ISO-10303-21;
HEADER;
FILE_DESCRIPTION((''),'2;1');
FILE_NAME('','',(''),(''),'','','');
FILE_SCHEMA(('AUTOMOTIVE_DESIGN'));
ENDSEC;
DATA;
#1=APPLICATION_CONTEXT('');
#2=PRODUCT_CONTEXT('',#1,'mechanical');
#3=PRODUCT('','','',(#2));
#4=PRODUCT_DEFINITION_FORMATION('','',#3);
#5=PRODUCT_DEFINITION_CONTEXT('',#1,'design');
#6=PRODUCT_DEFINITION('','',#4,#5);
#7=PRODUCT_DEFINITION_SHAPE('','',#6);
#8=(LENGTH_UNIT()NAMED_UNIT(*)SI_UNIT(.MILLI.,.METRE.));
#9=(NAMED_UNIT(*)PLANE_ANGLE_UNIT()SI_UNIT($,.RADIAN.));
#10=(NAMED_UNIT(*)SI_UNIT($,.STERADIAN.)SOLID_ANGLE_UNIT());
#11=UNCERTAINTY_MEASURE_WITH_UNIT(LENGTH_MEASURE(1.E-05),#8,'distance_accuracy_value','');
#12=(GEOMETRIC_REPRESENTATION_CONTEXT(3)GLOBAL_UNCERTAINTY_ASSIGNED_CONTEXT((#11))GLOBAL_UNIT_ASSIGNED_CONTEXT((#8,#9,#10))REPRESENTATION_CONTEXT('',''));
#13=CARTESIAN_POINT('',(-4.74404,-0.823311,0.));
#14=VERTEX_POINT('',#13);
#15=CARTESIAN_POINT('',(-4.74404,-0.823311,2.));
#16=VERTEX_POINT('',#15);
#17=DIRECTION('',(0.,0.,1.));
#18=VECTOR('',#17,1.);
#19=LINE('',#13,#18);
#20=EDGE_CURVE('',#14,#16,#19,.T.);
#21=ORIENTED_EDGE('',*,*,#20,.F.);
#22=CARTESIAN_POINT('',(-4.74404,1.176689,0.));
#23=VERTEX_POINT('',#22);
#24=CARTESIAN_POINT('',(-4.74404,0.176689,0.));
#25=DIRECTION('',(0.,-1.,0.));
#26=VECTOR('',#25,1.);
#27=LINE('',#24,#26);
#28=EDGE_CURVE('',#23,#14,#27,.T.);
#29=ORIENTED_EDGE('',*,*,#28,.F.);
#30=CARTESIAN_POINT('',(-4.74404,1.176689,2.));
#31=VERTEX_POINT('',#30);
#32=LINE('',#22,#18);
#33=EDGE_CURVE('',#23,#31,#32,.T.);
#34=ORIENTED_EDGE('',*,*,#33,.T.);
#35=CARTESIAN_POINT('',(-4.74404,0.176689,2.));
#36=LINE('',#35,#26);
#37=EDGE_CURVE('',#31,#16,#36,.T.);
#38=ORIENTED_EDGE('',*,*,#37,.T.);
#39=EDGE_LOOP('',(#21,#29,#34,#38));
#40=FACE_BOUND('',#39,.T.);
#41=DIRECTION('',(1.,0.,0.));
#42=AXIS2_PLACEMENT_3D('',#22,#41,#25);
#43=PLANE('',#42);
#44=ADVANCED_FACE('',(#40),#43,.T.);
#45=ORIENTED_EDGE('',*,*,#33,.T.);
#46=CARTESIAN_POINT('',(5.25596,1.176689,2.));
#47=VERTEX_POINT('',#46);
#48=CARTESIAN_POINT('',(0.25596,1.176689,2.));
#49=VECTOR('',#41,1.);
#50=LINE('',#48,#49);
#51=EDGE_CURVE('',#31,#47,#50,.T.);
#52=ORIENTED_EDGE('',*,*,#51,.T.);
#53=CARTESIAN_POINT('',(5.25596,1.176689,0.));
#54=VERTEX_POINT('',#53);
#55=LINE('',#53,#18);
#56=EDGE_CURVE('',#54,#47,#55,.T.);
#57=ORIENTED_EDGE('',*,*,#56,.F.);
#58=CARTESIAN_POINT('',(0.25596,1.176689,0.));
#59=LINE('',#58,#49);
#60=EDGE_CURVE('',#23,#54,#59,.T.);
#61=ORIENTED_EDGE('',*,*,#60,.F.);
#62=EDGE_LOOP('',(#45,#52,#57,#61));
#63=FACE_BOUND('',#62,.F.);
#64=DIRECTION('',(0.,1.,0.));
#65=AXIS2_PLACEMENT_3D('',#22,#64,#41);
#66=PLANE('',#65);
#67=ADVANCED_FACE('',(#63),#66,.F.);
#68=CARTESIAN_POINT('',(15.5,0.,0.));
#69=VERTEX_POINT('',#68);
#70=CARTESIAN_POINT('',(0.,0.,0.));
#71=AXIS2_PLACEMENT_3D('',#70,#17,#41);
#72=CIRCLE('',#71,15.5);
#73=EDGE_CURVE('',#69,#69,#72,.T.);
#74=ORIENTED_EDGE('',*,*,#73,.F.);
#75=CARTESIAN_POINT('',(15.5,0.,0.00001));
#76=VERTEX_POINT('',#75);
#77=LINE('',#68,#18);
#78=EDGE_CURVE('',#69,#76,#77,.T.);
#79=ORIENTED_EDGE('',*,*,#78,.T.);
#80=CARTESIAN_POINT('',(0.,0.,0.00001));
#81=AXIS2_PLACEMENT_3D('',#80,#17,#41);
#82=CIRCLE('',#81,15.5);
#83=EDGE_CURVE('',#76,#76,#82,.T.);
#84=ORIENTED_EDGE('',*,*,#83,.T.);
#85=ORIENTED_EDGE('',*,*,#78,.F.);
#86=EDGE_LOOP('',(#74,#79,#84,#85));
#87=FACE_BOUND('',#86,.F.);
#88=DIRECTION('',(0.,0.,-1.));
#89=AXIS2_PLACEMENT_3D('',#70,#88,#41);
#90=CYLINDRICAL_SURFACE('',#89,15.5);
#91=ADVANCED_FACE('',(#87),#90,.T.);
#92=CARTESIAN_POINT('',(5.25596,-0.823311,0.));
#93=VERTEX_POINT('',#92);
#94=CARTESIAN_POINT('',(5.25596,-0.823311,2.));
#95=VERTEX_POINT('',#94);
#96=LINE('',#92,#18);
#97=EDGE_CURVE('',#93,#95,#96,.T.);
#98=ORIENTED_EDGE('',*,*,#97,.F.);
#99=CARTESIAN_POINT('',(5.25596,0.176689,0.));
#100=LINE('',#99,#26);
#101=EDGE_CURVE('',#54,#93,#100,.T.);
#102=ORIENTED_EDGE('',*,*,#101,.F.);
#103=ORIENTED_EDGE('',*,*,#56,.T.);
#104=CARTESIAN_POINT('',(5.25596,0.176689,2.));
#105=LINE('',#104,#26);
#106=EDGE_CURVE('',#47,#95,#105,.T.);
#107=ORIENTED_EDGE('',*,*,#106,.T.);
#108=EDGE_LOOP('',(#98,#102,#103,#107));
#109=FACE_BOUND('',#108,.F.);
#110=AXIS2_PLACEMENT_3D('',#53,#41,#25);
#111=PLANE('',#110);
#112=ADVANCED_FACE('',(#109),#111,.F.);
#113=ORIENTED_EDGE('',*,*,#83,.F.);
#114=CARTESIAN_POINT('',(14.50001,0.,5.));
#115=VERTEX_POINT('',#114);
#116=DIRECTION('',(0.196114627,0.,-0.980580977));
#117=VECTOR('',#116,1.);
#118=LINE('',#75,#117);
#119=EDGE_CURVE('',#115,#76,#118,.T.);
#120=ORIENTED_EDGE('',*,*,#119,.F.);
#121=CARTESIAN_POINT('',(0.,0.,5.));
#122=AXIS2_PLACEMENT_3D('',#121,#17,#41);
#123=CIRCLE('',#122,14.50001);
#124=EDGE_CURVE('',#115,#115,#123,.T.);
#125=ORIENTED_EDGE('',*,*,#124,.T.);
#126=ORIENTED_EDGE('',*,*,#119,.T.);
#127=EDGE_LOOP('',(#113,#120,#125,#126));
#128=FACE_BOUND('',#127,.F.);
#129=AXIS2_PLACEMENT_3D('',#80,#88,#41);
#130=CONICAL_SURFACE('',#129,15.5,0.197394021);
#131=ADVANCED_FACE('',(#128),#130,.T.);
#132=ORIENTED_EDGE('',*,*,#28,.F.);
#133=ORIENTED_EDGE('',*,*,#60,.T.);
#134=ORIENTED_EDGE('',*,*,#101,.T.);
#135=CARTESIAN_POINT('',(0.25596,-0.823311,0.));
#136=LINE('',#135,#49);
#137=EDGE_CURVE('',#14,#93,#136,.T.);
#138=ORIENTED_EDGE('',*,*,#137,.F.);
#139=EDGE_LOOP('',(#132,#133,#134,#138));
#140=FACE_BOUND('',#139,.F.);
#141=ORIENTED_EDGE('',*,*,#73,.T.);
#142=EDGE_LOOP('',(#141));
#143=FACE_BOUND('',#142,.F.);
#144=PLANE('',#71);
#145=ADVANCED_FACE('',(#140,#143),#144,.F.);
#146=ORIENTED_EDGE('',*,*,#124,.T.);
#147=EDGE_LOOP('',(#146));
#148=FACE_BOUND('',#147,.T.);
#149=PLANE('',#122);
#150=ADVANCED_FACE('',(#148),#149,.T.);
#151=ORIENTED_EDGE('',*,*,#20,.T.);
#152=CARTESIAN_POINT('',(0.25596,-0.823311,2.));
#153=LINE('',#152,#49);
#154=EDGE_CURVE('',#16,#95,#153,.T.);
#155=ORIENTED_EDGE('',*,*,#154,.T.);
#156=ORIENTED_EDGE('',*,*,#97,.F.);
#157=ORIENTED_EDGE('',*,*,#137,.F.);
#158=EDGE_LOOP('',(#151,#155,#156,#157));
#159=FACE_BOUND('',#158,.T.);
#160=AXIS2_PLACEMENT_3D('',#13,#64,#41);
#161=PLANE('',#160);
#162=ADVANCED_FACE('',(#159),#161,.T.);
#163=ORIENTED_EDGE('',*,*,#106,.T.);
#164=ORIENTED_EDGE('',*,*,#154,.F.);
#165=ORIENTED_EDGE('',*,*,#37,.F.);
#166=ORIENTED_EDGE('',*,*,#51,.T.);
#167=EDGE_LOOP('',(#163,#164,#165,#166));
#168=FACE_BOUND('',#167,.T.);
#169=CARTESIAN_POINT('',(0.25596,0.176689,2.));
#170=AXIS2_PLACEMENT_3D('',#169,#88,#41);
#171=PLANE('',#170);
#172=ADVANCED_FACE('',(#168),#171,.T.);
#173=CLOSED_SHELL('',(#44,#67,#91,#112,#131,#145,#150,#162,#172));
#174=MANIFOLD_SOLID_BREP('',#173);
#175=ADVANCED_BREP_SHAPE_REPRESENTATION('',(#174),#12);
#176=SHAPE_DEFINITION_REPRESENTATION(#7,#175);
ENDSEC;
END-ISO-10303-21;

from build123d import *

# Parameters (mm, degrees)
F0_R     = 15.5
F1_DEPTH = 5
F2_SIZE2 = 4.99999
F2_SIZE  = 0.99999
F3_W     = 10
F3_H     = 2
F4_DEPTH = 2


# Not quite as in the source:
# - a fillet or chamfer is up to 0.001 mm smaller than in the source, because OpenCascade refuses the exact size


with BuildPart() as f1:
    # F0 (on Top) → F1 (new body)
    with BuildSketch(Plane.XY):
        Circle(F0_R)
    extrude(amount=F1_DEPTH)

    # F2 (size 1 and 5 in the source; OpenCascade refuses exactly that, so slightly less here)
    f2_edges = [f1.edges().sort_by_distance(p)[0] for p in [
        (-15.5, 0, 5),
    ]]
    f2_side = f1.faces().sort_by_distance((0, 0, 5))[0]
    chamfer(f2_edges, length=F2_SIZE, length2=F2_SIZE2, reference=f2_side)

    # F3 (on face) → F4 (cut)
    with BuildSketch(Plane(origin=(0, 0, 0), x_dir=(1, 0, 0), z_dir=(0, 0, -1))):
        with Locations((0.2559603993, -0.1766888017)):
            Rectangle(F3_W, F3_H)
    extrude(amount=-F4_DEPTH, mode=Mode.SUBTRACT)


solid = f1.part
